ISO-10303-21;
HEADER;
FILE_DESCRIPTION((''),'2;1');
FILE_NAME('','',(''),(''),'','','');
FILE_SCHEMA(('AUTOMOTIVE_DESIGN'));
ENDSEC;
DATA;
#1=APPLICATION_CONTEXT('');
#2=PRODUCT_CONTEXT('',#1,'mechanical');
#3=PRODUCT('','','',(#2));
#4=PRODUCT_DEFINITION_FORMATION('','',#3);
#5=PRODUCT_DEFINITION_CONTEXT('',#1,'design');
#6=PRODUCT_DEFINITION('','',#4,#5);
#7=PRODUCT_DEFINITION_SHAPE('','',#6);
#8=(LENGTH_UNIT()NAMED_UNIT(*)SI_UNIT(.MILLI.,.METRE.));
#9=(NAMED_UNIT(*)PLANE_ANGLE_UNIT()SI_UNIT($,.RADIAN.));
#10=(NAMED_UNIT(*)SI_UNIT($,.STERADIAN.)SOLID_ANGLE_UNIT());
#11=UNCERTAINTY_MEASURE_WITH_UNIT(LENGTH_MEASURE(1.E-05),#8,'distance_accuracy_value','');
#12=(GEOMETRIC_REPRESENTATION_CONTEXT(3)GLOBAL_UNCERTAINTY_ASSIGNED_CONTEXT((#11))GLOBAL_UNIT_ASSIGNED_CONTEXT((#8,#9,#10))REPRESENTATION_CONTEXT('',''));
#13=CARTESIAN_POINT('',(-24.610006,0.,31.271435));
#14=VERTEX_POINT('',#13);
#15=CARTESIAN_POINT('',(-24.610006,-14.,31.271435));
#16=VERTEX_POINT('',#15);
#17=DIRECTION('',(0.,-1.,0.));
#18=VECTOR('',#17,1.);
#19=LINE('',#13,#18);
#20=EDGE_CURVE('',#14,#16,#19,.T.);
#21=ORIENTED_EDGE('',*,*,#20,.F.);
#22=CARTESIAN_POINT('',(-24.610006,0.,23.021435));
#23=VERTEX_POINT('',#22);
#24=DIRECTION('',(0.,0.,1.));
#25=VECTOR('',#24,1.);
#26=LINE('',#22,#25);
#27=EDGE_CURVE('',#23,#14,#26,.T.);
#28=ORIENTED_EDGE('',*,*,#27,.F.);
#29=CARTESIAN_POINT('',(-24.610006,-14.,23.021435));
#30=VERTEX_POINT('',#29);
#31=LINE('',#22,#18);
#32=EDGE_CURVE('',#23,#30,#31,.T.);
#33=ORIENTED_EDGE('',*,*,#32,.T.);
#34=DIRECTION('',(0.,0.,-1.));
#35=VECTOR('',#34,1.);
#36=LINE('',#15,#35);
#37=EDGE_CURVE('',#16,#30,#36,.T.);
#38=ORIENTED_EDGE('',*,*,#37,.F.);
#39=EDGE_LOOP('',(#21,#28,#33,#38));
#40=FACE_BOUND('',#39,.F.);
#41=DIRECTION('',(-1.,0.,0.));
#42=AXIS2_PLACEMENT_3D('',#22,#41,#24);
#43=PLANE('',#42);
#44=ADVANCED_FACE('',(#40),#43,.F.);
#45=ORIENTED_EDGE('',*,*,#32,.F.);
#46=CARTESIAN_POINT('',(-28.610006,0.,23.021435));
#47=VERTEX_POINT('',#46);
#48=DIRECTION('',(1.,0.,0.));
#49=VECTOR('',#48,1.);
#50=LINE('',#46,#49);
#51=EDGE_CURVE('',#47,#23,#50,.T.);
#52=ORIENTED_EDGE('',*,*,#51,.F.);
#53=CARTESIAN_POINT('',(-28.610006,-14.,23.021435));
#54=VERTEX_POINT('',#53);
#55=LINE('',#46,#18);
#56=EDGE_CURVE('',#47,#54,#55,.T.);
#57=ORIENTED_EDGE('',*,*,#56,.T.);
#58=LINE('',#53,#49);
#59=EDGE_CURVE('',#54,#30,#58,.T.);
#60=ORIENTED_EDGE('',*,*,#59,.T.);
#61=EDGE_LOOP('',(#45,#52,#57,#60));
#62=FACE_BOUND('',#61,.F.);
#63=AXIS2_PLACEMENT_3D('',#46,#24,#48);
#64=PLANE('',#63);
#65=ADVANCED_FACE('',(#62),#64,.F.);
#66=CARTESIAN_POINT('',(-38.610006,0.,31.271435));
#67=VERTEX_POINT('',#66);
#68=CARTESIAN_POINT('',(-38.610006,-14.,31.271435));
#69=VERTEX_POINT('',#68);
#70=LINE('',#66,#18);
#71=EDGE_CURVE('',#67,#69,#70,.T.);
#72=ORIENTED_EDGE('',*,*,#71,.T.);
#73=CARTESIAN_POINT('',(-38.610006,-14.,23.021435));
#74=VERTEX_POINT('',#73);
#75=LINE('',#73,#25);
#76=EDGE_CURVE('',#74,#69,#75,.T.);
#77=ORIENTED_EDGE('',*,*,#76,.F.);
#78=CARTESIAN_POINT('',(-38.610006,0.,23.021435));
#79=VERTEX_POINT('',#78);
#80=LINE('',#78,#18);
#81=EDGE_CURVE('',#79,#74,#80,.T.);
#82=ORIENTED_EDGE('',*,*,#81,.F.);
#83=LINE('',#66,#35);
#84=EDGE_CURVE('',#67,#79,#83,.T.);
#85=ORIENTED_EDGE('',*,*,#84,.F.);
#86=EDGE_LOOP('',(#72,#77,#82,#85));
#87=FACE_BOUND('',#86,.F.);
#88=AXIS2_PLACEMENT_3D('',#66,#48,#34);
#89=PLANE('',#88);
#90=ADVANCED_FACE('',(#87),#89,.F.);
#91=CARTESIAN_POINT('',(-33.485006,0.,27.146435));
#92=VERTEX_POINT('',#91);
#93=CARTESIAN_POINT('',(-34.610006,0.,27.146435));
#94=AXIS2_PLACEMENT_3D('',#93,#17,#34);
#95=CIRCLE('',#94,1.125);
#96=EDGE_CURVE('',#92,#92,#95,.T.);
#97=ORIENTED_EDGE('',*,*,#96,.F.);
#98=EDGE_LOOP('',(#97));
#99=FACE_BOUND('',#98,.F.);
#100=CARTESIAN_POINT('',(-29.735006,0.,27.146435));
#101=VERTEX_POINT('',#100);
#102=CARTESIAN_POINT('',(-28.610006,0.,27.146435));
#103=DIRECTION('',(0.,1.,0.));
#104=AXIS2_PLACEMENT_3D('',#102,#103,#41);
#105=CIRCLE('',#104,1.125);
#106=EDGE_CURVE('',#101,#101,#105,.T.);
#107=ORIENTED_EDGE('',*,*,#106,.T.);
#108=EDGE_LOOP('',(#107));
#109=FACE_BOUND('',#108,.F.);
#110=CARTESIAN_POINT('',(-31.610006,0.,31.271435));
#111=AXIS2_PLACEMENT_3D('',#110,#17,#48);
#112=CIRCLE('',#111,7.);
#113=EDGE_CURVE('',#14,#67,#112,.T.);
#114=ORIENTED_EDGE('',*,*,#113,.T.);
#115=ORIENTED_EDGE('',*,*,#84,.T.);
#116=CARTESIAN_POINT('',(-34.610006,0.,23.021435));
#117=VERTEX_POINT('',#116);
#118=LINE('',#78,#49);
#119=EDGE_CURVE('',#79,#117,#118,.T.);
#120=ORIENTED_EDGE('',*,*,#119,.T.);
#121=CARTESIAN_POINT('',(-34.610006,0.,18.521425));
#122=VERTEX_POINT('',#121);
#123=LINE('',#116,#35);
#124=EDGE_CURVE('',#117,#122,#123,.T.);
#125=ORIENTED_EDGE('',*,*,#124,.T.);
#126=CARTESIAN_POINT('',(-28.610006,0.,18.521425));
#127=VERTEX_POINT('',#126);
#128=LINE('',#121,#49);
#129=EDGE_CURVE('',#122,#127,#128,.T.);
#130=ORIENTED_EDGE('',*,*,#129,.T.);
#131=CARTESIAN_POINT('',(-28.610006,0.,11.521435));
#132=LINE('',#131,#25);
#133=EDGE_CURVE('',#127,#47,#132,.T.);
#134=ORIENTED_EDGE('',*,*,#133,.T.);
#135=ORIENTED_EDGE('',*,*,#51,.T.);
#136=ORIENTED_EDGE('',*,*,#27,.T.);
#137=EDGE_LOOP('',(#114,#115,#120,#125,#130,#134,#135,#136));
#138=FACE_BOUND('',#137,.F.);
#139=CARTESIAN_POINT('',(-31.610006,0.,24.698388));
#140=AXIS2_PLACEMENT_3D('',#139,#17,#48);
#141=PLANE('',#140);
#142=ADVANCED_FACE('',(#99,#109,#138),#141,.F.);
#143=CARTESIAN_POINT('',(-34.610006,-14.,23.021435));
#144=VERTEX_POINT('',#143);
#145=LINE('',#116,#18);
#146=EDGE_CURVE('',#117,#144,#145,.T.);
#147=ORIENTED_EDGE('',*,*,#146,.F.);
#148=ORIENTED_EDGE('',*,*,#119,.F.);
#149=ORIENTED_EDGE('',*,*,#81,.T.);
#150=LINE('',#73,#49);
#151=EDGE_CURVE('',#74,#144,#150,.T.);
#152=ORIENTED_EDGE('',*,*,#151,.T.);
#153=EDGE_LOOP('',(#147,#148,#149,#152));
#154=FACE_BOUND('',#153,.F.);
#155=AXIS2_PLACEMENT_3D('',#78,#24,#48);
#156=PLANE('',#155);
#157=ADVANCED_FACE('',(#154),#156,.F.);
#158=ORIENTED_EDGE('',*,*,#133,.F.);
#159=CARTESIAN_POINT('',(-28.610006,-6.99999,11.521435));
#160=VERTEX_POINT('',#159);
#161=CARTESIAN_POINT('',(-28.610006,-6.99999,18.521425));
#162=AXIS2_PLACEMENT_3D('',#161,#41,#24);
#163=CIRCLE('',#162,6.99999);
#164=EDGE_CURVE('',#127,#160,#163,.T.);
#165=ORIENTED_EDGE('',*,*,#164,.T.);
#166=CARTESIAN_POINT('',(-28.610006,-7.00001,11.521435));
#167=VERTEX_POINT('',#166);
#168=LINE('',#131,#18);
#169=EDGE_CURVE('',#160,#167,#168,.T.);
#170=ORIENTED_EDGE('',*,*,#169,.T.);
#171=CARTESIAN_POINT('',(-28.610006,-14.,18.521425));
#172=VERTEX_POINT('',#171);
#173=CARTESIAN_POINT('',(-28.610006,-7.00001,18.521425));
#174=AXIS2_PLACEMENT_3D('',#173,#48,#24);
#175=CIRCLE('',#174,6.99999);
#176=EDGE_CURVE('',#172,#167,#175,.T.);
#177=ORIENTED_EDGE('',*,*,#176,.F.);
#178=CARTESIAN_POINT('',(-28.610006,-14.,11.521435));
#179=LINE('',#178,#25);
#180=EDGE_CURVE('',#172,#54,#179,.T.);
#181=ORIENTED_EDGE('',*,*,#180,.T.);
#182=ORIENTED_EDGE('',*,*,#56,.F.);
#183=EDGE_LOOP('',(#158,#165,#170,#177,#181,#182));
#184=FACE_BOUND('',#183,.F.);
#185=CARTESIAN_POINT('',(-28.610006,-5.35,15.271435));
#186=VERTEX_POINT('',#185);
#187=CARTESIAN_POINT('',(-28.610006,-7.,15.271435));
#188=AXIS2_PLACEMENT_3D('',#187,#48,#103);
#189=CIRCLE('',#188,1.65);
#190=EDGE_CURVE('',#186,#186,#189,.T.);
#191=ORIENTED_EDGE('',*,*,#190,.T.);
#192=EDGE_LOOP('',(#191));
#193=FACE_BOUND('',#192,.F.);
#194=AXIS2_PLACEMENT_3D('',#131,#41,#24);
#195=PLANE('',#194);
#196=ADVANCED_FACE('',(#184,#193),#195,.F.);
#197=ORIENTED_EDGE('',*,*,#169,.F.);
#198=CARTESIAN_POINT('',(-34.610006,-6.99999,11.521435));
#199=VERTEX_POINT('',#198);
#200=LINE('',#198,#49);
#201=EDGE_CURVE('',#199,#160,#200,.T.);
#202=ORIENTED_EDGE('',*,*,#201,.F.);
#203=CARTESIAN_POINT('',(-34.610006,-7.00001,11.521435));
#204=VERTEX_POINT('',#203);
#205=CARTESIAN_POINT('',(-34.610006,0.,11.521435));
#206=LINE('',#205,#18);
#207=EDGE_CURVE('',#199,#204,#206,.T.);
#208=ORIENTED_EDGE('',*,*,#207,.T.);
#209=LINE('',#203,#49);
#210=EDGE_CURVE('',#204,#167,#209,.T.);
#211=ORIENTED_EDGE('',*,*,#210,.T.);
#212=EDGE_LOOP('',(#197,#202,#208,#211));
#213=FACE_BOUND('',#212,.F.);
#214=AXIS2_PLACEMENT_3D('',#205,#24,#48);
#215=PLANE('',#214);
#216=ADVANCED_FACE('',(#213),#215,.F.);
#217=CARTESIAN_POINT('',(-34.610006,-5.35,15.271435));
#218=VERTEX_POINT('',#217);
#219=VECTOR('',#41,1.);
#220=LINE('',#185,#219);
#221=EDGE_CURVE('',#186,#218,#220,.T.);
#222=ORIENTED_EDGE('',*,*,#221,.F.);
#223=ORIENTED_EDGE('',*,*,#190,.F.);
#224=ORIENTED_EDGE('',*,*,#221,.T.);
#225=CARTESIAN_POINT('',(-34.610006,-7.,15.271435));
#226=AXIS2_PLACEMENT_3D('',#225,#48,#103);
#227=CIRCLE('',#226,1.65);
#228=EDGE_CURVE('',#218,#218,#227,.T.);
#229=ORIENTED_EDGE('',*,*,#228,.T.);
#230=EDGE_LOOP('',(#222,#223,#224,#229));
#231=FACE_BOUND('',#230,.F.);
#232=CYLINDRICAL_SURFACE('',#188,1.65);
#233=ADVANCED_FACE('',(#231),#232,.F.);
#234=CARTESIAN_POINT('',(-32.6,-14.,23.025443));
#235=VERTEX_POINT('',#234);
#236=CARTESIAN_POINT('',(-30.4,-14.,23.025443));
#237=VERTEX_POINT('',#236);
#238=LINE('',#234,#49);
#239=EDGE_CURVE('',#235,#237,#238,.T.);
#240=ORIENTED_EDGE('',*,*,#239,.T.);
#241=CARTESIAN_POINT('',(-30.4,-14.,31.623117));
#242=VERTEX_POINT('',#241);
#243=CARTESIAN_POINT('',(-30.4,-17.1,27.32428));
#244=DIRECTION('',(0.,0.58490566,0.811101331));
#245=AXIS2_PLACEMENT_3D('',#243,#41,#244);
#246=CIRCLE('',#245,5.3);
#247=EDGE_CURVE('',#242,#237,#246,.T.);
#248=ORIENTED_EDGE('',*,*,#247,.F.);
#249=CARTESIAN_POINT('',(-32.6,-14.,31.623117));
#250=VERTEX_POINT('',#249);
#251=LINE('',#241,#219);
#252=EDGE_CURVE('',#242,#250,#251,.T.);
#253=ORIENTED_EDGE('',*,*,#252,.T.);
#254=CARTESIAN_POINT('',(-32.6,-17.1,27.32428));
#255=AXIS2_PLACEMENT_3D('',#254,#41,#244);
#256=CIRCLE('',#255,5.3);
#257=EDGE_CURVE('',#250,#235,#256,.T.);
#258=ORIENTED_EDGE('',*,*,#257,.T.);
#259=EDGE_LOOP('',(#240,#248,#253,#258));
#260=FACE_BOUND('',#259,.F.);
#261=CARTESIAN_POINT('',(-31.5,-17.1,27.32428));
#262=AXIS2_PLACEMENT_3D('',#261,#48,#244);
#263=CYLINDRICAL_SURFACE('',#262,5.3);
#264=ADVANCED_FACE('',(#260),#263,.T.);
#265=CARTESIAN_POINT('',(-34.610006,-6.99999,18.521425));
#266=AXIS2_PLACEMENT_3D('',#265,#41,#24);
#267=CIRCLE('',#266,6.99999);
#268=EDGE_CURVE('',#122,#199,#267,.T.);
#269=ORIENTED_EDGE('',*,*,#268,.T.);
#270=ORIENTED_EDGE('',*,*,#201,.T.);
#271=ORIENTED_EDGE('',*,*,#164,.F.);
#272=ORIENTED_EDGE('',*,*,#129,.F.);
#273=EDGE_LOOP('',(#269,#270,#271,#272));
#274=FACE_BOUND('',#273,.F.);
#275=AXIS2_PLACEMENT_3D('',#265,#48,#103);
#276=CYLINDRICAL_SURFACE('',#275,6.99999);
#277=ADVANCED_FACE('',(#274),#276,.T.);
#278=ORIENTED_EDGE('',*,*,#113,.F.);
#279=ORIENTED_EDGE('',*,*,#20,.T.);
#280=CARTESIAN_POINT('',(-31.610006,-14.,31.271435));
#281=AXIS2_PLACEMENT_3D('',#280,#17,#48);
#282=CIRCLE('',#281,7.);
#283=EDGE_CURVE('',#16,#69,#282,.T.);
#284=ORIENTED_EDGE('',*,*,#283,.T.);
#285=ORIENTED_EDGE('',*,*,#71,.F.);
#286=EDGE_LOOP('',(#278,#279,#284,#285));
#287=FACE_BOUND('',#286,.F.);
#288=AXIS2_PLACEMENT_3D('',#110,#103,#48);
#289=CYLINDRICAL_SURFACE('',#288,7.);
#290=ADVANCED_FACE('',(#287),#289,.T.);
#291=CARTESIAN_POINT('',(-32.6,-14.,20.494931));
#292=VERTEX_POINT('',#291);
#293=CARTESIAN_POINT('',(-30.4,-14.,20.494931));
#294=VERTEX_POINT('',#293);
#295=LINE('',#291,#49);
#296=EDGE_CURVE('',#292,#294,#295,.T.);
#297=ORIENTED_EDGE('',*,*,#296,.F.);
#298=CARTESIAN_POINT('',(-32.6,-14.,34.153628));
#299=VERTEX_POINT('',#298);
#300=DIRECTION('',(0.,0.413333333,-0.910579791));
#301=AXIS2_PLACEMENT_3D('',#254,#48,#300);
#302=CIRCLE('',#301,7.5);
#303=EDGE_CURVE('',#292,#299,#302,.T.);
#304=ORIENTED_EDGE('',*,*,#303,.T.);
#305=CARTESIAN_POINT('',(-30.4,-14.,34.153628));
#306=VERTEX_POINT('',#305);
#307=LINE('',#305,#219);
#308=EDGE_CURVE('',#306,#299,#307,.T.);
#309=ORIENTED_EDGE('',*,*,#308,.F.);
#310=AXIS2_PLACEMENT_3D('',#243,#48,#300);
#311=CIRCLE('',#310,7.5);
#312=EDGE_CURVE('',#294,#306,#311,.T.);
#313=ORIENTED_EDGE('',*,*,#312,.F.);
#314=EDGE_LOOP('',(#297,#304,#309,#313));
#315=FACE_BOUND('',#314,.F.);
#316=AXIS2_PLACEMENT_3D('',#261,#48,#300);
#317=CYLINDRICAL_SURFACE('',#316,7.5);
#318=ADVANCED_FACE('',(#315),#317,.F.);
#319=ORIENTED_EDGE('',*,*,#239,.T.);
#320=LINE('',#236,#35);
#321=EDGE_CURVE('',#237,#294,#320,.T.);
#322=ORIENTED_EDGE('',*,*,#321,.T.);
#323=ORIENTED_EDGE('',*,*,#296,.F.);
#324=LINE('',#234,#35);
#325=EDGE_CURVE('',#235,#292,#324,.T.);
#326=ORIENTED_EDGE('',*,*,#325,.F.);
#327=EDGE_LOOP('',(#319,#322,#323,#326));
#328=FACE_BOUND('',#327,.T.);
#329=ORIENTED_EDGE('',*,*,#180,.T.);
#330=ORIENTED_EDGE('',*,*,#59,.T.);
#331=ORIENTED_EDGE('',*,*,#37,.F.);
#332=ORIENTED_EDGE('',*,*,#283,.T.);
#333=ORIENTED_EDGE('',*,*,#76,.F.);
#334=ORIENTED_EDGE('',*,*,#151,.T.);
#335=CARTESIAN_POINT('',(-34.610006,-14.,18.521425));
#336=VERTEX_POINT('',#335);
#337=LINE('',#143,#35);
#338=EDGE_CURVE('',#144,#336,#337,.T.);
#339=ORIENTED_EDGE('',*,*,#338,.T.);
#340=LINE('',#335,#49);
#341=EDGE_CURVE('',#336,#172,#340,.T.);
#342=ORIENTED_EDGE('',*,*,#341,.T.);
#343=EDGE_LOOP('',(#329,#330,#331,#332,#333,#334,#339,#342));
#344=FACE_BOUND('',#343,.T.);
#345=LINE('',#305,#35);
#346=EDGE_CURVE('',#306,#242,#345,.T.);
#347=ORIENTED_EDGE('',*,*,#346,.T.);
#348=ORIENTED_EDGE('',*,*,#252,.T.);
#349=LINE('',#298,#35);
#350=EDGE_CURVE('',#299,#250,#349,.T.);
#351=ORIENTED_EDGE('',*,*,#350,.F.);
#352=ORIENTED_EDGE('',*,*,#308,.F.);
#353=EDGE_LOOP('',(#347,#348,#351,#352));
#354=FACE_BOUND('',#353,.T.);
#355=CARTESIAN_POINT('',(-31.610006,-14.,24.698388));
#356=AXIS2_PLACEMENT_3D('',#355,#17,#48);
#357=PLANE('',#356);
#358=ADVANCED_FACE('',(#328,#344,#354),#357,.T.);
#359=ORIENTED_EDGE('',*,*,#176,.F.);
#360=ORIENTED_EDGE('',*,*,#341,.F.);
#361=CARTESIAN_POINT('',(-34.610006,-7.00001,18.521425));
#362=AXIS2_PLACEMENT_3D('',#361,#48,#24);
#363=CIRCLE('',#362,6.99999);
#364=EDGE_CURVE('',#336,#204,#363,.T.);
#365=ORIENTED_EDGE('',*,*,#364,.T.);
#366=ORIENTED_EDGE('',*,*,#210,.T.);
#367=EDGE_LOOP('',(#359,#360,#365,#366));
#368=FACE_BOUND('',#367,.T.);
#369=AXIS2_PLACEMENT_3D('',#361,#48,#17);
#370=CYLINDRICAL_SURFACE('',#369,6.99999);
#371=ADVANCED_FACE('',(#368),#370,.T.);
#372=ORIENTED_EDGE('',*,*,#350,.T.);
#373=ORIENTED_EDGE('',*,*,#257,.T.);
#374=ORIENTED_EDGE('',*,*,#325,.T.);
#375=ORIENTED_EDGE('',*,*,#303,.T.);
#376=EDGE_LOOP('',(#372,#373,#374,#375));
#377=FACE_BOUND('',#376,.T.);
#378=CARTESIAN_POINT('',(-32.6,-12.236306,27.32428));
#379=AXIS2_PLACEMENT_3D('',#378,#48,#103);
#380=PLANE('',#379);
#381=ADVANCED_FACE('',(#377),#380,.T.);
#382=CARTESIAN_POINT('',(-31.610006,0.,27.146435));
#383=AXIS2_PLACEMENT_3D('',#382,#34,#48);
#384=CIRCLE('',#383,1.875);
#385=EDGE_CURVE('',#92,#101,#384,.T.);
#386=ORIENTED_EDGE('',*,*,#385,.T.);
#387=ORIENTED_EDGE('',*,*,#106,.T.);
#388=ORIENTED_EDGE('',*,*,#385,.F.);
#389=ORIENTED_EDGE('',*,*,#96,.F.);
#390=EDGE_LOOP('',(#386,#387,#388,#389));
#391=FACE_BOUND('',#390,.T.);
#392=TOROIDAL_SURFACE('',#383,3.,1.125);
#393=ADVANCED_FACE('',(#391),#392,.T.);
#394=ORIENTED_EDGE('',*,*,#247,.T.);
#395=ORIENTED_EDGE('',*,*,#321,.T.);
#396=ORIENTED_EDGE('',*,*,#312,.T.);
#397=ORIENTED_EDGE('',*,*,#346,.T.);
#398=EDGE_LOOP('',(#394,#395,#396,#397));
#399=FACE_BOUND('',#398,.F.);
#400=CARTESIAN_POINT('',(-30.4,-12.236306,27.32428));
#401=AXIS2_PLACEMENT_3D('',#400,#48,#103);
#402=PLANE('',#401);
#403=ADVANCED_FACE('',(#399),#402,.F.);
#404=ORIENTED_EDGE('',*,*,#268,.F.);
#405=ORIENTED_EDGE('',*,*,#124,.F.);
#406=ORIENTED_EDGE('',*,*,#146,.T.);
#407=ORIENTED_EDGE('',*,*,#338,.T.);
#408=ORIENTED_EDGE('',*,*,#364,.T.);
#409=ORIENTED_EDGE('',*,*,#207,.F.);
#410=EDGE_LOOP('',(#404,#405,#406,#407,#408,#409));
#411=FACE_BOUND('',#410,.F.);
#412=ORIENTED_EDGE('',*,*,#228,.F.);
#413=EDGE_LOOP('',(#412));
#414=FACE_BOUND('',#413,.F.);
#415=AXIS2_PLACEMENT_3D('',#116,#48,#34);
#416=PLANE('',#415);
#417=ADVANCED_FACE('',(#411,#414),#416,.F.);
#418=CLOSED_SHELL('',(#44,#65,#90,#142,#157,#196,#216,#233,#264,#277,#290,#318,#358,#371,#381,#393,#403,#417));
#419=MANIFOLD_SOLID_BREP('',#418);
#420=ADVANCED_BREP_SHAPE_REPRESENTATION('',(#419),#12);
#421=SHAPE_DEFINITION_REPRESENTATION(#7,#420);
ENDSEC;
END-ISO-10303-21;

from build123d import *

# Parameters (mm, degrees)
F1_DEPTH  = 14
F2_R      = 1.65
F3_DEPTH  = 25
F4_R      = 6.99999
F5_R      = 1.125
F7_R      = 1.125
F9_W      = 14
F9_H      = 6.4348620027
F10_DEPTH = 29.7
F13_DEPTH = 1.1


# Not quite as in the source:
# - a fillet or chamfer is up to 0.001 mm smaller than in the source, because OpenCascade refuses the exact size


with BuildPart() as f1:
    # F0 (on Front) → F1 (new body)
    with BuildSketch(Plane.XZ):
        with BuildLine():
            ThreePointArc((-24.6100064665, 31.2714347113), (-31.6100064665, 38.2714347113), (-38.6100064665, 31.2714347113))
            Line((-38.6100064665, 31.2714347113), (-38.6100064665, 23.0214347113))
            Line((-38.6100064665, 23.0214347113), (-34.6100064665, 23.0214347113))
            Line((-34.6100064665, 23.0214347113), (-34.6100064665, 22.0214347113))
            Line((-34.6100064665, 22.0214347113), (-34.6100064665, 19.0214347113))
            Line((-34.6100064665, 19.0214347113), (-34.6100064665, 11.5214347113))
            Line((-34.6100064665, 11.5214347113), (-28.6100064665, 11.5214347113))
            Line((-28.6100064665, 11.5214347113), (-28.6100064665, 15.2714347113))
            Line((-28.6100064665, 15.2714347113), (-28.6100064665, 19.0214347113))
            Line((-28.6100064665, 19.0214347113), (-28.6100064665, 22.0214347113))
            Line((-28.6100064665, 22.0214347113), (-28.6100064665, 23.0214347113))
            Line((-28.6100064665, 23.0214347113), (-24.6100064665, 23.0214347113))
            Line((-24.6100064665, 23.0214347113), (-24.6100064665, 31.2714347113))
        make_face()
    extrude(amount=F1_DEPTH)

    # F2 (on face) → F3 (cut)
    with BuildSketch(Plane.YZ.offset(-28.6100064665)):
        with Locations((-7, 15.2714347113)):
            Circle(F2_R)
    extrude(amount=-F3_DEPTH, mode=Mode.SUBTRACT)

    # F4 (radius 7 in the source; OpenCascade refuses exactly that, so slightly less here)
    f4_edges = [f1.edges().sort_by_distance(p)[0] for p in [
        (-31.610006, -14, 11.521435),
        (-31.610006, 0, 11.521435),
    ]]
    fillet(f4_edges, radius=F4_R)

    # F5 (on face) → F6 (revolve)
    with BuildSketch(Plane.XZ.offset(14)):
        with Locations((-34.6100064665, 27.1464347113)):
            Circle(F5_R)
    revolve(axis=Axis((-31.6100064665, -14, 28.3964347113), (0, 0, -1)))

    # F7 (on face) → F8 (revolve)
    with BuildSketch(Plane(origin=(0, 0, 0), x_dir=(-1, 0, 0), z_dir=(0, 1, 0))):
        with Locations((28.6100064665, 27.1464347113)):
            Circle(F7_R)
    revolve(axis=Axis((-31.6100064665, 0, 28.3964347113), (0, 0, -1)))

    # F9 (on Top) → F10 (cut)
    with BuildSketch(Plane.XY):
        with Locations((-31.6100064665, -17.2174310014)):
            Rectangle(F9_W, F9_H)
    extrude(amount=F10_DEPTH, mode=Mode.SUBTRACT)

    # F12 (on offset) → F13 (cut, symmetric)
    with BuildSketch(Plane.YZ.offset(-31.5)):
        with BuildLine():
            ThreePointArc((-14, 31.6231168223), (-11.8, 27.3242797703), (-14, 23.0254427182))
            Line((-14, 23.0254427182), (-14, 20.4949313387))
            ThreePointArc((-14, 20.4949313387), (-9.6, 27.3242797703), (-14, 34.1536282018))
            Line((-14, 34.1536282018), (-14, 31.6231168223))
        make_face()
    extrude(amount=F13_DEPTH, both=True, mode=Mode.SUBTRACT)


solid = f1.part
